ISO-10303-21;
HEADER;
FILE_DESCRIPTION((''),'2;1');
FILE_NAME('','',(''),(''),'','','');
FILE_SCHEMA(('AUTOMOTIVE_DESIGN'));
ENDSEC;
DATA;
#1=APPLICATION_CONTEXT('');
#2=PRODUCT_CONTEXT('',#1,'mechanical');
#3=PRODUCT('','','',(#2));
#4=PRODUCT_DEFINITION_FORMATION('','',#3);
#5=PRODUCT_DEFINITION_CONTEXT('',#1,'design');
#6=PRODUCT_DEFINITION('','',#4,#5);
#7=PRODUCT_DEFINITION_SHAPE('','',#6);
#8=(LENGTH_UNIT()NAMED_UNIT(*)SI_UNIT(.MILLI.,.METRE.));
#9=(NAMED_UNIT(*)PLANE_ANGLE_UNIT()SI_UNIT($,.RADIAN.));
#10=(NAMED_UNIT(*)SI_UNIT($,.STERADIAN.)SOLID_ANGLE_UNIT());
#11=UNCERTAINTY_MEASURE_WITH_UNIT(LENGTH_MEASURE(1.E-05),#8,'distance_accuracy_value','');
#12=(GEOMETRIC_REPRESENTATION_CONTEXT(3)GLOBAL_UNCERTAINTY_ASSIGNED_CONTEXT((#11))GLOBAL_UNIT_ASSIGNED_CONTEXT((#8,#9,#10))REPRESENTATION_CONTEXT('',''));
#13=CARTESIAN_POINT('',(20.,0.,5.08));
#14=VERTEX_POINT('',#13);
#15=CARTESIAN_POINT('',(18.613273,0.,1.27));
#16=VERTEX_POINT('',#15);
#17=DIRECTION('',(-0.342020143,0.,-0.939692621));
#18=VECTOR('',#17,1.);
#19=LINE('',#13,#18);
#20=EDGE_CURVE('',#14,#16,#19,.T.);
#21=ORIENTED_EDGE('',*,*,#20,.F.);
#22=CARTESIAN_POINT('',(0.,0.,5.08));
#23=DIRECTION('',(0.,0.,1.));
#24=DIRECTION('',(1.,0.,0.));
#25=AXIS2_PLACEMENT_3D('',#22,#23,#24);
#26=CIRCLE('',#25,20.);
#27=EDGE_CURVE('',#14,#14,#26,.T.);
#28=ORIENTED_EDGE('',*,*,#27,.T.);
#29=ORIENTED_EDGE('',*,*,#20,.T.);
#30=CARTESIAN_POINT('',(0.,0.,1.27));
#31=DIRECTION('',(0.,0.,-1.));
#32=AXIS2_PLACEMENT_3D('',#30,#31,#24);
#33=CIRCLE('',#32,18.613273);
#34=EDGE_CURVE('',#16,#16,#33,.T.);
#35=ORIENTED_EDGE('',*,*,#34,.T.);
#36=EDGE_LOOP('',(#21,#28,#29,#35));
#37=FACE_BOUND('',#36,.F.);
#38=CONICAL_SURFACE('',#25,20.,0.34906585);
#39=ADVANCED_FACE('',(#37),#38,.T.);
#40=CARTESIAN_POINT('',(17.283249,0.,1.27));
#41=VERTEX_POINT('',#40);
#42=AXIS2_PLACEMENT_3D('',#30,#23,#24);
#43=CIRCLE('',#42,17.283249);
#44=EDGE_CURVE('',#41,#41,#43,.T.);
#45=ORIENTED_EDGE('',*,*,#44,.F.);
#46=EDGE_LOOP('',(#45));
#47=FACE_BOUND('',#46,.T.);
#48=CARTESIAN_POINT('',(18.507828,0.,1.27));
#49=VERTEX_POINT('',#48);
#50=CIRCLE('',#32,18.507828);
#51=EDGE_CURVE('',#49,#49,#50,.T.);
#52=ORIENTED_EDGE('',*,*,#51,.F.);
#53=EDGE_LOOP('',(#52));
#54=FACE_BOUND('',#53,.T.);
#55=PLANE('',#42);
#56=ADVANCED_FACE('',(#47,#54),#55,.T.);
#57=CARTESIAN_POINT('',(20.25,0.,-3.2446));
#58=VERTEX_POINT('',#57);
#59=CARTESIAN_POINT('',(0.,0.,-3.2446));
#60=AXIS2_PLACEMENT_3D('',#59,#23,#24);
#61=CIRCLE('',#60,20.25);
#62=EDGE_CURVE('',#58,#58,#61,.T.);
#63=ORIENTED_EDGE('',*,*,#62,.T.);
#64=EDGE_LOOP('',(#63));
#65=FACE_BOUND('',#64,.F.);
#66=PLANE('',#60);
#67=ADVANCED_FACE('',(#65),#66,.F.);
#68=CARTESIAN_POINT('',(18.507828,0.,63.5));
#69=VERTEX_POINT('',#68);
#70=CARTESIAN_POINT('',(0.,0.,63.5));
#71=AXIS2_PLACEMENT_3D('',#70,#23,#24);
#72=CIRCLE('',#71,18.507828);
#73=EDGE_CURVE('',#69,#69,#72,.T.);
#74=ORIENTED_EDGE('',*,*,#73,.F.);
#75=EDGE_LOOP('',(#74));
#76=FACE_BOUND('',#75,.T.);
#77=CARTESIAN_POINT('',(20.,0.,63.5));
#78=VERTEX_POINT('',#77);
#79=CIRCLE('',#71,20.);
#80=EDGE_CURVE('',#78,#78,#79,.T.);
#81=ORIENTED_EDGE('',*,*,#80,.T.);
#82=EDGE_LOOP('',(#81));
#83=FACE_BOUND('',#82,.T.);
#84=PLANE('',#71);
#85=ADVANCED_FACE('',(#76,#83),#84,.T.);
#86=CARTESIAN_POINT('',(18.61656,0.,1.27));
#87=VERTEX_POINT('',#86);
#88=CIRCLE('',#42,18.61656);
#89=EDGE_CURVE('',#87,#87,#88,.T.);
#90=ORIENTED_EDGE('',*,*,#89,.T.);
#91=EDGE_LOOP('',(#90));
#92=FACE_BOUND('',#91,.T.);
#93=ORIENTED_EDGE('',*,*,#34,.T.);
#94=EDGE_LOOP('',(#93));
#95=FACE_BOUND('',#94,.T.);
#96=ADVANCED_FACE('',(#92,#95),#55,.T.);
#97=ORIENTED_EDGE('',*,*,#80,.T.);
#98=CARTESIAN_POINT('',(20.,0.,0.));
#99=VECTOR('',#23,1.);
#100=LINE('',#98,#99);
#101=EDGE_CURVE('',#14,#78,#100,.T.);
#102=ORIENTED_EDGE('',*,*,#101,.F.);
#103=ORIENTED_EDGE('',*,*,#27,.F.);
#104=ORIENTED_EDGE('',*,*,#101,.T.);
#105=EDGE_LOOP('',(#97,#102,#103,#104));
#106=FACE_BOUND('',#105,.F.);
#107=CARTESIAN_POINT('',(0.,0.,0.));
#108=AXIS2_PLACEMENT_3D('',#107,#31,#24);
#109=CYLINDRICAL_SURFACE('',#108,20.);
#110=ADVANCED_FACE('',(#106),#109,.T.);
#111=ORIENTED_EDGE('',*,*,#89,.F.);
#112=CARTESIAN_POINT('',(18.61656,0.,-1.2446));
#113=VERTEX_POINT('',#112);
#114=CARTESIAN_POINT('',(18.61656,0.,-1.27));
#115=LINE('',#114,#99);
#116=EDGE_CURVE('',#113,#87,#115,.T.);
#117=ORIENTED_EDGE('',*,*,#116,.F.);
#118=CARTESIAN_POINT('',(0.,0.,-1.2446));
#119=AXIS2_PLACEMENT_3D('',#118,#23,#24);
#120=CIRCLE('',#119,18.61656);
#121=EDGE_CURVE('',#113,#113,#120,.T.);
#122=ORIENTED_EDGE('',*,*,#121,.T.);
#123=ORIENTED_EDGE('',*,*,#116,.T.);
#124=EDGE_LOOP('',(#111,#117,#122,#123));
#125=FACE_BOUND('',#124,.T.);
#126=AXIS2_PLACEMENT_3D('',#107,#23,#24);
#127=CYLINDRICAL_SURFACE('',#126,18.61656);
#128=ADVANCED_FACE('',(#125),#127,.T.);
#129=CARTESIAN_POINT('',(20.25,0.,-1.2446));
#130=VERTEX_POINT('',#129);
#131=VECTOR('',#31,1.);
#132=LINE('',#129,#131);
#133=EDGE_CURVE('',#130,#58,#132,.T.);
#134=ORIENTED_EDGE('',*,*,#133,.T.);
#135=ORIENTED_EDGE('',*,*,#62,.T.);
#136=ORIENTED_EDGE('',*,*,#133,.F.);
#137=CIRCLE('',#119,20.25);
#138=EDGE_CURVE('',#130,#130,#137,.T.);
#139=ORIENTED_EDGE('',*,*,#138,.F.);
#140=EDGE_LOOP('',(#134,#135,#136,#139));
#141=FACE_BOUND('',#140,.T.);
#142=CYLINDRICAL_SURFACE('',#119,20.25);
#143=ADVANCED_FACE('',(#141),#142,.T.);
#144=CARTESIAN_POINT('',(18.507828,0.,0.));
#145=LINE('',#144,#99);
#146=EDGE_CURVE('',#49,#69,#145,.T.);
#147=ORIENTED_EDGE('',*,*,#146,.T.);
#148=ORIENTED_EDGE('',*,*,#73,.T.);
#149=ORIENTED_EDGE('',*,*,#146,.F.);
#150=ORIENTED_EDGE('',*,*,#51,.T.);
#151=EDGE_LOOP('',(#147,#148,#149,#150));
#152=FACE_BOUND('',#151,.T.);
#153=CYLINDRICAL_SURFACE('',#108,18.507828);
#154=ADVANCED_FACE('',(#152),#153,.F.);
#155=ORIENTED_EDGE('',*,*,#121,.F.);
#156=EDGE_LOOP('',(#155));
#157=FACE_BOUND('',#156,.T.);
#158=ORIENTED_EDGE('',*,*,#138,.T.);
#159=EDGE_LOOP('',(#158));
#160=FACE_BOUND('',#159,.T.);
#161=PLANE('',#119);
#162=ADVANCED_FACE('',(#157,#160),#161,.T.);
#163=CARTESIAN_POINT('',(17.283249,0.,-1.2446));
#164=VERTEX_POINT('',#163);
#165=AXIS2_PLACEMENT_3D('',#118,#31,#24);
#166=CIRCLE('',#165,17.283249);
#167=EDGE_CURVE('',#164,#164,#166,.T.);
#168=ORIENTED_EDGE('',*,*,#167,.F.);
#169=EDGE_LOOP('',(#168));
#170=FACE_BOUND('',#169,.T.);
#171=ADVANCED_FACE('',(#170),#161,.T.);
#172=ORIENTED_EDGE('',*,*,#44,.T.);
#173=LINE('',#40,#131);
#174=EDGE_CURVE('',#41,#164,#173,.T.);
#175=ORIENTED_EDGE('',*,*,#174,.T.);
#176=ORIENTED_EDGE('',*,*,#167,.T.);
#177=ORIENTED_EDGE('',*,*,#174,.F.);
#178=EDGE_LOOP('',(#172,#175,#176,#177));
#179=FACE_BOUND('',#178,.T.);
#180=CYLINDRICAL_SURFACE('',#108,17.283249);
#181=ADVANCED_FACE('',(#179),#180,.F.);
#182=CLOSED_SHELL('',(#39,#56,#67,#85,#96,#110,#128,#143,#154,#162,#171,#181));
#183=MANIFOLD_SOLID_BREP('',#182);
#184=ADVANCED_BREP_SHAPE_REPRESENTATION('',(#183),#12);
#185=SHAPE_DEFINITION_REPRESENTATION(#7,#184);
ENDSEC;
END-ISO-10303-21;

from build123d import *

# Parameters (mm, degrees)
F0_R     = 20
F0_R_2   = 18.5078276758
F1_DEPTH = 63.5
F3_R     = 18.6165604835
F3_R_2   = 17.2832490894
F4_DEPTH = 1.27
F6_R     = 20.25
F7_DEPTH = 2


# Not quite as in the source:
# - a fillet or chamfer that OpenCascade refuses, or shapes differently, is made with other operations: its cross-section is extruded or revolved along the edge and cut away or added


with BuildPart() as f1:
    # F0 (on Top) → F1 (new body)
    with BuildSketch(Plane.XY):
        Circle(F0_R)
        Circle(F0_R_2, mode=Mode.SUBTRACT)
    extrude(amount=F1_DEPTH)

    # F2: chamfer of 5.08 x 1.8489687901 on 1 edges, made by hand

    # F2_s1 → F2_t2 (revolve, cut)
    with BuildSketch(Plane.XZ):
        Polygon((20, 5.08), (18.1510312099, 0), (20, 0), align=None)
    revolve(axis=Axis((0, 0, 0), (0, 0, 1)), mode=Mode.SUBTRACT)

    # F3 (on Top) → F4 (join, symmetric)
    with BuildSketch(Plane.XY):
        Circle(F3_R)
        Circle(F3_R_2, mode=Mode.SUBTRACT)
    extrude(amount=F4_DEPTH, both=True)

    # F6 (on offset) → F7 (join)
    with BuildSketch(Plane.XY.offset(-1.2446)):
        Circle(F6_R)
    extrude(amount=-F7_DEPTH)


solid = f1.part
